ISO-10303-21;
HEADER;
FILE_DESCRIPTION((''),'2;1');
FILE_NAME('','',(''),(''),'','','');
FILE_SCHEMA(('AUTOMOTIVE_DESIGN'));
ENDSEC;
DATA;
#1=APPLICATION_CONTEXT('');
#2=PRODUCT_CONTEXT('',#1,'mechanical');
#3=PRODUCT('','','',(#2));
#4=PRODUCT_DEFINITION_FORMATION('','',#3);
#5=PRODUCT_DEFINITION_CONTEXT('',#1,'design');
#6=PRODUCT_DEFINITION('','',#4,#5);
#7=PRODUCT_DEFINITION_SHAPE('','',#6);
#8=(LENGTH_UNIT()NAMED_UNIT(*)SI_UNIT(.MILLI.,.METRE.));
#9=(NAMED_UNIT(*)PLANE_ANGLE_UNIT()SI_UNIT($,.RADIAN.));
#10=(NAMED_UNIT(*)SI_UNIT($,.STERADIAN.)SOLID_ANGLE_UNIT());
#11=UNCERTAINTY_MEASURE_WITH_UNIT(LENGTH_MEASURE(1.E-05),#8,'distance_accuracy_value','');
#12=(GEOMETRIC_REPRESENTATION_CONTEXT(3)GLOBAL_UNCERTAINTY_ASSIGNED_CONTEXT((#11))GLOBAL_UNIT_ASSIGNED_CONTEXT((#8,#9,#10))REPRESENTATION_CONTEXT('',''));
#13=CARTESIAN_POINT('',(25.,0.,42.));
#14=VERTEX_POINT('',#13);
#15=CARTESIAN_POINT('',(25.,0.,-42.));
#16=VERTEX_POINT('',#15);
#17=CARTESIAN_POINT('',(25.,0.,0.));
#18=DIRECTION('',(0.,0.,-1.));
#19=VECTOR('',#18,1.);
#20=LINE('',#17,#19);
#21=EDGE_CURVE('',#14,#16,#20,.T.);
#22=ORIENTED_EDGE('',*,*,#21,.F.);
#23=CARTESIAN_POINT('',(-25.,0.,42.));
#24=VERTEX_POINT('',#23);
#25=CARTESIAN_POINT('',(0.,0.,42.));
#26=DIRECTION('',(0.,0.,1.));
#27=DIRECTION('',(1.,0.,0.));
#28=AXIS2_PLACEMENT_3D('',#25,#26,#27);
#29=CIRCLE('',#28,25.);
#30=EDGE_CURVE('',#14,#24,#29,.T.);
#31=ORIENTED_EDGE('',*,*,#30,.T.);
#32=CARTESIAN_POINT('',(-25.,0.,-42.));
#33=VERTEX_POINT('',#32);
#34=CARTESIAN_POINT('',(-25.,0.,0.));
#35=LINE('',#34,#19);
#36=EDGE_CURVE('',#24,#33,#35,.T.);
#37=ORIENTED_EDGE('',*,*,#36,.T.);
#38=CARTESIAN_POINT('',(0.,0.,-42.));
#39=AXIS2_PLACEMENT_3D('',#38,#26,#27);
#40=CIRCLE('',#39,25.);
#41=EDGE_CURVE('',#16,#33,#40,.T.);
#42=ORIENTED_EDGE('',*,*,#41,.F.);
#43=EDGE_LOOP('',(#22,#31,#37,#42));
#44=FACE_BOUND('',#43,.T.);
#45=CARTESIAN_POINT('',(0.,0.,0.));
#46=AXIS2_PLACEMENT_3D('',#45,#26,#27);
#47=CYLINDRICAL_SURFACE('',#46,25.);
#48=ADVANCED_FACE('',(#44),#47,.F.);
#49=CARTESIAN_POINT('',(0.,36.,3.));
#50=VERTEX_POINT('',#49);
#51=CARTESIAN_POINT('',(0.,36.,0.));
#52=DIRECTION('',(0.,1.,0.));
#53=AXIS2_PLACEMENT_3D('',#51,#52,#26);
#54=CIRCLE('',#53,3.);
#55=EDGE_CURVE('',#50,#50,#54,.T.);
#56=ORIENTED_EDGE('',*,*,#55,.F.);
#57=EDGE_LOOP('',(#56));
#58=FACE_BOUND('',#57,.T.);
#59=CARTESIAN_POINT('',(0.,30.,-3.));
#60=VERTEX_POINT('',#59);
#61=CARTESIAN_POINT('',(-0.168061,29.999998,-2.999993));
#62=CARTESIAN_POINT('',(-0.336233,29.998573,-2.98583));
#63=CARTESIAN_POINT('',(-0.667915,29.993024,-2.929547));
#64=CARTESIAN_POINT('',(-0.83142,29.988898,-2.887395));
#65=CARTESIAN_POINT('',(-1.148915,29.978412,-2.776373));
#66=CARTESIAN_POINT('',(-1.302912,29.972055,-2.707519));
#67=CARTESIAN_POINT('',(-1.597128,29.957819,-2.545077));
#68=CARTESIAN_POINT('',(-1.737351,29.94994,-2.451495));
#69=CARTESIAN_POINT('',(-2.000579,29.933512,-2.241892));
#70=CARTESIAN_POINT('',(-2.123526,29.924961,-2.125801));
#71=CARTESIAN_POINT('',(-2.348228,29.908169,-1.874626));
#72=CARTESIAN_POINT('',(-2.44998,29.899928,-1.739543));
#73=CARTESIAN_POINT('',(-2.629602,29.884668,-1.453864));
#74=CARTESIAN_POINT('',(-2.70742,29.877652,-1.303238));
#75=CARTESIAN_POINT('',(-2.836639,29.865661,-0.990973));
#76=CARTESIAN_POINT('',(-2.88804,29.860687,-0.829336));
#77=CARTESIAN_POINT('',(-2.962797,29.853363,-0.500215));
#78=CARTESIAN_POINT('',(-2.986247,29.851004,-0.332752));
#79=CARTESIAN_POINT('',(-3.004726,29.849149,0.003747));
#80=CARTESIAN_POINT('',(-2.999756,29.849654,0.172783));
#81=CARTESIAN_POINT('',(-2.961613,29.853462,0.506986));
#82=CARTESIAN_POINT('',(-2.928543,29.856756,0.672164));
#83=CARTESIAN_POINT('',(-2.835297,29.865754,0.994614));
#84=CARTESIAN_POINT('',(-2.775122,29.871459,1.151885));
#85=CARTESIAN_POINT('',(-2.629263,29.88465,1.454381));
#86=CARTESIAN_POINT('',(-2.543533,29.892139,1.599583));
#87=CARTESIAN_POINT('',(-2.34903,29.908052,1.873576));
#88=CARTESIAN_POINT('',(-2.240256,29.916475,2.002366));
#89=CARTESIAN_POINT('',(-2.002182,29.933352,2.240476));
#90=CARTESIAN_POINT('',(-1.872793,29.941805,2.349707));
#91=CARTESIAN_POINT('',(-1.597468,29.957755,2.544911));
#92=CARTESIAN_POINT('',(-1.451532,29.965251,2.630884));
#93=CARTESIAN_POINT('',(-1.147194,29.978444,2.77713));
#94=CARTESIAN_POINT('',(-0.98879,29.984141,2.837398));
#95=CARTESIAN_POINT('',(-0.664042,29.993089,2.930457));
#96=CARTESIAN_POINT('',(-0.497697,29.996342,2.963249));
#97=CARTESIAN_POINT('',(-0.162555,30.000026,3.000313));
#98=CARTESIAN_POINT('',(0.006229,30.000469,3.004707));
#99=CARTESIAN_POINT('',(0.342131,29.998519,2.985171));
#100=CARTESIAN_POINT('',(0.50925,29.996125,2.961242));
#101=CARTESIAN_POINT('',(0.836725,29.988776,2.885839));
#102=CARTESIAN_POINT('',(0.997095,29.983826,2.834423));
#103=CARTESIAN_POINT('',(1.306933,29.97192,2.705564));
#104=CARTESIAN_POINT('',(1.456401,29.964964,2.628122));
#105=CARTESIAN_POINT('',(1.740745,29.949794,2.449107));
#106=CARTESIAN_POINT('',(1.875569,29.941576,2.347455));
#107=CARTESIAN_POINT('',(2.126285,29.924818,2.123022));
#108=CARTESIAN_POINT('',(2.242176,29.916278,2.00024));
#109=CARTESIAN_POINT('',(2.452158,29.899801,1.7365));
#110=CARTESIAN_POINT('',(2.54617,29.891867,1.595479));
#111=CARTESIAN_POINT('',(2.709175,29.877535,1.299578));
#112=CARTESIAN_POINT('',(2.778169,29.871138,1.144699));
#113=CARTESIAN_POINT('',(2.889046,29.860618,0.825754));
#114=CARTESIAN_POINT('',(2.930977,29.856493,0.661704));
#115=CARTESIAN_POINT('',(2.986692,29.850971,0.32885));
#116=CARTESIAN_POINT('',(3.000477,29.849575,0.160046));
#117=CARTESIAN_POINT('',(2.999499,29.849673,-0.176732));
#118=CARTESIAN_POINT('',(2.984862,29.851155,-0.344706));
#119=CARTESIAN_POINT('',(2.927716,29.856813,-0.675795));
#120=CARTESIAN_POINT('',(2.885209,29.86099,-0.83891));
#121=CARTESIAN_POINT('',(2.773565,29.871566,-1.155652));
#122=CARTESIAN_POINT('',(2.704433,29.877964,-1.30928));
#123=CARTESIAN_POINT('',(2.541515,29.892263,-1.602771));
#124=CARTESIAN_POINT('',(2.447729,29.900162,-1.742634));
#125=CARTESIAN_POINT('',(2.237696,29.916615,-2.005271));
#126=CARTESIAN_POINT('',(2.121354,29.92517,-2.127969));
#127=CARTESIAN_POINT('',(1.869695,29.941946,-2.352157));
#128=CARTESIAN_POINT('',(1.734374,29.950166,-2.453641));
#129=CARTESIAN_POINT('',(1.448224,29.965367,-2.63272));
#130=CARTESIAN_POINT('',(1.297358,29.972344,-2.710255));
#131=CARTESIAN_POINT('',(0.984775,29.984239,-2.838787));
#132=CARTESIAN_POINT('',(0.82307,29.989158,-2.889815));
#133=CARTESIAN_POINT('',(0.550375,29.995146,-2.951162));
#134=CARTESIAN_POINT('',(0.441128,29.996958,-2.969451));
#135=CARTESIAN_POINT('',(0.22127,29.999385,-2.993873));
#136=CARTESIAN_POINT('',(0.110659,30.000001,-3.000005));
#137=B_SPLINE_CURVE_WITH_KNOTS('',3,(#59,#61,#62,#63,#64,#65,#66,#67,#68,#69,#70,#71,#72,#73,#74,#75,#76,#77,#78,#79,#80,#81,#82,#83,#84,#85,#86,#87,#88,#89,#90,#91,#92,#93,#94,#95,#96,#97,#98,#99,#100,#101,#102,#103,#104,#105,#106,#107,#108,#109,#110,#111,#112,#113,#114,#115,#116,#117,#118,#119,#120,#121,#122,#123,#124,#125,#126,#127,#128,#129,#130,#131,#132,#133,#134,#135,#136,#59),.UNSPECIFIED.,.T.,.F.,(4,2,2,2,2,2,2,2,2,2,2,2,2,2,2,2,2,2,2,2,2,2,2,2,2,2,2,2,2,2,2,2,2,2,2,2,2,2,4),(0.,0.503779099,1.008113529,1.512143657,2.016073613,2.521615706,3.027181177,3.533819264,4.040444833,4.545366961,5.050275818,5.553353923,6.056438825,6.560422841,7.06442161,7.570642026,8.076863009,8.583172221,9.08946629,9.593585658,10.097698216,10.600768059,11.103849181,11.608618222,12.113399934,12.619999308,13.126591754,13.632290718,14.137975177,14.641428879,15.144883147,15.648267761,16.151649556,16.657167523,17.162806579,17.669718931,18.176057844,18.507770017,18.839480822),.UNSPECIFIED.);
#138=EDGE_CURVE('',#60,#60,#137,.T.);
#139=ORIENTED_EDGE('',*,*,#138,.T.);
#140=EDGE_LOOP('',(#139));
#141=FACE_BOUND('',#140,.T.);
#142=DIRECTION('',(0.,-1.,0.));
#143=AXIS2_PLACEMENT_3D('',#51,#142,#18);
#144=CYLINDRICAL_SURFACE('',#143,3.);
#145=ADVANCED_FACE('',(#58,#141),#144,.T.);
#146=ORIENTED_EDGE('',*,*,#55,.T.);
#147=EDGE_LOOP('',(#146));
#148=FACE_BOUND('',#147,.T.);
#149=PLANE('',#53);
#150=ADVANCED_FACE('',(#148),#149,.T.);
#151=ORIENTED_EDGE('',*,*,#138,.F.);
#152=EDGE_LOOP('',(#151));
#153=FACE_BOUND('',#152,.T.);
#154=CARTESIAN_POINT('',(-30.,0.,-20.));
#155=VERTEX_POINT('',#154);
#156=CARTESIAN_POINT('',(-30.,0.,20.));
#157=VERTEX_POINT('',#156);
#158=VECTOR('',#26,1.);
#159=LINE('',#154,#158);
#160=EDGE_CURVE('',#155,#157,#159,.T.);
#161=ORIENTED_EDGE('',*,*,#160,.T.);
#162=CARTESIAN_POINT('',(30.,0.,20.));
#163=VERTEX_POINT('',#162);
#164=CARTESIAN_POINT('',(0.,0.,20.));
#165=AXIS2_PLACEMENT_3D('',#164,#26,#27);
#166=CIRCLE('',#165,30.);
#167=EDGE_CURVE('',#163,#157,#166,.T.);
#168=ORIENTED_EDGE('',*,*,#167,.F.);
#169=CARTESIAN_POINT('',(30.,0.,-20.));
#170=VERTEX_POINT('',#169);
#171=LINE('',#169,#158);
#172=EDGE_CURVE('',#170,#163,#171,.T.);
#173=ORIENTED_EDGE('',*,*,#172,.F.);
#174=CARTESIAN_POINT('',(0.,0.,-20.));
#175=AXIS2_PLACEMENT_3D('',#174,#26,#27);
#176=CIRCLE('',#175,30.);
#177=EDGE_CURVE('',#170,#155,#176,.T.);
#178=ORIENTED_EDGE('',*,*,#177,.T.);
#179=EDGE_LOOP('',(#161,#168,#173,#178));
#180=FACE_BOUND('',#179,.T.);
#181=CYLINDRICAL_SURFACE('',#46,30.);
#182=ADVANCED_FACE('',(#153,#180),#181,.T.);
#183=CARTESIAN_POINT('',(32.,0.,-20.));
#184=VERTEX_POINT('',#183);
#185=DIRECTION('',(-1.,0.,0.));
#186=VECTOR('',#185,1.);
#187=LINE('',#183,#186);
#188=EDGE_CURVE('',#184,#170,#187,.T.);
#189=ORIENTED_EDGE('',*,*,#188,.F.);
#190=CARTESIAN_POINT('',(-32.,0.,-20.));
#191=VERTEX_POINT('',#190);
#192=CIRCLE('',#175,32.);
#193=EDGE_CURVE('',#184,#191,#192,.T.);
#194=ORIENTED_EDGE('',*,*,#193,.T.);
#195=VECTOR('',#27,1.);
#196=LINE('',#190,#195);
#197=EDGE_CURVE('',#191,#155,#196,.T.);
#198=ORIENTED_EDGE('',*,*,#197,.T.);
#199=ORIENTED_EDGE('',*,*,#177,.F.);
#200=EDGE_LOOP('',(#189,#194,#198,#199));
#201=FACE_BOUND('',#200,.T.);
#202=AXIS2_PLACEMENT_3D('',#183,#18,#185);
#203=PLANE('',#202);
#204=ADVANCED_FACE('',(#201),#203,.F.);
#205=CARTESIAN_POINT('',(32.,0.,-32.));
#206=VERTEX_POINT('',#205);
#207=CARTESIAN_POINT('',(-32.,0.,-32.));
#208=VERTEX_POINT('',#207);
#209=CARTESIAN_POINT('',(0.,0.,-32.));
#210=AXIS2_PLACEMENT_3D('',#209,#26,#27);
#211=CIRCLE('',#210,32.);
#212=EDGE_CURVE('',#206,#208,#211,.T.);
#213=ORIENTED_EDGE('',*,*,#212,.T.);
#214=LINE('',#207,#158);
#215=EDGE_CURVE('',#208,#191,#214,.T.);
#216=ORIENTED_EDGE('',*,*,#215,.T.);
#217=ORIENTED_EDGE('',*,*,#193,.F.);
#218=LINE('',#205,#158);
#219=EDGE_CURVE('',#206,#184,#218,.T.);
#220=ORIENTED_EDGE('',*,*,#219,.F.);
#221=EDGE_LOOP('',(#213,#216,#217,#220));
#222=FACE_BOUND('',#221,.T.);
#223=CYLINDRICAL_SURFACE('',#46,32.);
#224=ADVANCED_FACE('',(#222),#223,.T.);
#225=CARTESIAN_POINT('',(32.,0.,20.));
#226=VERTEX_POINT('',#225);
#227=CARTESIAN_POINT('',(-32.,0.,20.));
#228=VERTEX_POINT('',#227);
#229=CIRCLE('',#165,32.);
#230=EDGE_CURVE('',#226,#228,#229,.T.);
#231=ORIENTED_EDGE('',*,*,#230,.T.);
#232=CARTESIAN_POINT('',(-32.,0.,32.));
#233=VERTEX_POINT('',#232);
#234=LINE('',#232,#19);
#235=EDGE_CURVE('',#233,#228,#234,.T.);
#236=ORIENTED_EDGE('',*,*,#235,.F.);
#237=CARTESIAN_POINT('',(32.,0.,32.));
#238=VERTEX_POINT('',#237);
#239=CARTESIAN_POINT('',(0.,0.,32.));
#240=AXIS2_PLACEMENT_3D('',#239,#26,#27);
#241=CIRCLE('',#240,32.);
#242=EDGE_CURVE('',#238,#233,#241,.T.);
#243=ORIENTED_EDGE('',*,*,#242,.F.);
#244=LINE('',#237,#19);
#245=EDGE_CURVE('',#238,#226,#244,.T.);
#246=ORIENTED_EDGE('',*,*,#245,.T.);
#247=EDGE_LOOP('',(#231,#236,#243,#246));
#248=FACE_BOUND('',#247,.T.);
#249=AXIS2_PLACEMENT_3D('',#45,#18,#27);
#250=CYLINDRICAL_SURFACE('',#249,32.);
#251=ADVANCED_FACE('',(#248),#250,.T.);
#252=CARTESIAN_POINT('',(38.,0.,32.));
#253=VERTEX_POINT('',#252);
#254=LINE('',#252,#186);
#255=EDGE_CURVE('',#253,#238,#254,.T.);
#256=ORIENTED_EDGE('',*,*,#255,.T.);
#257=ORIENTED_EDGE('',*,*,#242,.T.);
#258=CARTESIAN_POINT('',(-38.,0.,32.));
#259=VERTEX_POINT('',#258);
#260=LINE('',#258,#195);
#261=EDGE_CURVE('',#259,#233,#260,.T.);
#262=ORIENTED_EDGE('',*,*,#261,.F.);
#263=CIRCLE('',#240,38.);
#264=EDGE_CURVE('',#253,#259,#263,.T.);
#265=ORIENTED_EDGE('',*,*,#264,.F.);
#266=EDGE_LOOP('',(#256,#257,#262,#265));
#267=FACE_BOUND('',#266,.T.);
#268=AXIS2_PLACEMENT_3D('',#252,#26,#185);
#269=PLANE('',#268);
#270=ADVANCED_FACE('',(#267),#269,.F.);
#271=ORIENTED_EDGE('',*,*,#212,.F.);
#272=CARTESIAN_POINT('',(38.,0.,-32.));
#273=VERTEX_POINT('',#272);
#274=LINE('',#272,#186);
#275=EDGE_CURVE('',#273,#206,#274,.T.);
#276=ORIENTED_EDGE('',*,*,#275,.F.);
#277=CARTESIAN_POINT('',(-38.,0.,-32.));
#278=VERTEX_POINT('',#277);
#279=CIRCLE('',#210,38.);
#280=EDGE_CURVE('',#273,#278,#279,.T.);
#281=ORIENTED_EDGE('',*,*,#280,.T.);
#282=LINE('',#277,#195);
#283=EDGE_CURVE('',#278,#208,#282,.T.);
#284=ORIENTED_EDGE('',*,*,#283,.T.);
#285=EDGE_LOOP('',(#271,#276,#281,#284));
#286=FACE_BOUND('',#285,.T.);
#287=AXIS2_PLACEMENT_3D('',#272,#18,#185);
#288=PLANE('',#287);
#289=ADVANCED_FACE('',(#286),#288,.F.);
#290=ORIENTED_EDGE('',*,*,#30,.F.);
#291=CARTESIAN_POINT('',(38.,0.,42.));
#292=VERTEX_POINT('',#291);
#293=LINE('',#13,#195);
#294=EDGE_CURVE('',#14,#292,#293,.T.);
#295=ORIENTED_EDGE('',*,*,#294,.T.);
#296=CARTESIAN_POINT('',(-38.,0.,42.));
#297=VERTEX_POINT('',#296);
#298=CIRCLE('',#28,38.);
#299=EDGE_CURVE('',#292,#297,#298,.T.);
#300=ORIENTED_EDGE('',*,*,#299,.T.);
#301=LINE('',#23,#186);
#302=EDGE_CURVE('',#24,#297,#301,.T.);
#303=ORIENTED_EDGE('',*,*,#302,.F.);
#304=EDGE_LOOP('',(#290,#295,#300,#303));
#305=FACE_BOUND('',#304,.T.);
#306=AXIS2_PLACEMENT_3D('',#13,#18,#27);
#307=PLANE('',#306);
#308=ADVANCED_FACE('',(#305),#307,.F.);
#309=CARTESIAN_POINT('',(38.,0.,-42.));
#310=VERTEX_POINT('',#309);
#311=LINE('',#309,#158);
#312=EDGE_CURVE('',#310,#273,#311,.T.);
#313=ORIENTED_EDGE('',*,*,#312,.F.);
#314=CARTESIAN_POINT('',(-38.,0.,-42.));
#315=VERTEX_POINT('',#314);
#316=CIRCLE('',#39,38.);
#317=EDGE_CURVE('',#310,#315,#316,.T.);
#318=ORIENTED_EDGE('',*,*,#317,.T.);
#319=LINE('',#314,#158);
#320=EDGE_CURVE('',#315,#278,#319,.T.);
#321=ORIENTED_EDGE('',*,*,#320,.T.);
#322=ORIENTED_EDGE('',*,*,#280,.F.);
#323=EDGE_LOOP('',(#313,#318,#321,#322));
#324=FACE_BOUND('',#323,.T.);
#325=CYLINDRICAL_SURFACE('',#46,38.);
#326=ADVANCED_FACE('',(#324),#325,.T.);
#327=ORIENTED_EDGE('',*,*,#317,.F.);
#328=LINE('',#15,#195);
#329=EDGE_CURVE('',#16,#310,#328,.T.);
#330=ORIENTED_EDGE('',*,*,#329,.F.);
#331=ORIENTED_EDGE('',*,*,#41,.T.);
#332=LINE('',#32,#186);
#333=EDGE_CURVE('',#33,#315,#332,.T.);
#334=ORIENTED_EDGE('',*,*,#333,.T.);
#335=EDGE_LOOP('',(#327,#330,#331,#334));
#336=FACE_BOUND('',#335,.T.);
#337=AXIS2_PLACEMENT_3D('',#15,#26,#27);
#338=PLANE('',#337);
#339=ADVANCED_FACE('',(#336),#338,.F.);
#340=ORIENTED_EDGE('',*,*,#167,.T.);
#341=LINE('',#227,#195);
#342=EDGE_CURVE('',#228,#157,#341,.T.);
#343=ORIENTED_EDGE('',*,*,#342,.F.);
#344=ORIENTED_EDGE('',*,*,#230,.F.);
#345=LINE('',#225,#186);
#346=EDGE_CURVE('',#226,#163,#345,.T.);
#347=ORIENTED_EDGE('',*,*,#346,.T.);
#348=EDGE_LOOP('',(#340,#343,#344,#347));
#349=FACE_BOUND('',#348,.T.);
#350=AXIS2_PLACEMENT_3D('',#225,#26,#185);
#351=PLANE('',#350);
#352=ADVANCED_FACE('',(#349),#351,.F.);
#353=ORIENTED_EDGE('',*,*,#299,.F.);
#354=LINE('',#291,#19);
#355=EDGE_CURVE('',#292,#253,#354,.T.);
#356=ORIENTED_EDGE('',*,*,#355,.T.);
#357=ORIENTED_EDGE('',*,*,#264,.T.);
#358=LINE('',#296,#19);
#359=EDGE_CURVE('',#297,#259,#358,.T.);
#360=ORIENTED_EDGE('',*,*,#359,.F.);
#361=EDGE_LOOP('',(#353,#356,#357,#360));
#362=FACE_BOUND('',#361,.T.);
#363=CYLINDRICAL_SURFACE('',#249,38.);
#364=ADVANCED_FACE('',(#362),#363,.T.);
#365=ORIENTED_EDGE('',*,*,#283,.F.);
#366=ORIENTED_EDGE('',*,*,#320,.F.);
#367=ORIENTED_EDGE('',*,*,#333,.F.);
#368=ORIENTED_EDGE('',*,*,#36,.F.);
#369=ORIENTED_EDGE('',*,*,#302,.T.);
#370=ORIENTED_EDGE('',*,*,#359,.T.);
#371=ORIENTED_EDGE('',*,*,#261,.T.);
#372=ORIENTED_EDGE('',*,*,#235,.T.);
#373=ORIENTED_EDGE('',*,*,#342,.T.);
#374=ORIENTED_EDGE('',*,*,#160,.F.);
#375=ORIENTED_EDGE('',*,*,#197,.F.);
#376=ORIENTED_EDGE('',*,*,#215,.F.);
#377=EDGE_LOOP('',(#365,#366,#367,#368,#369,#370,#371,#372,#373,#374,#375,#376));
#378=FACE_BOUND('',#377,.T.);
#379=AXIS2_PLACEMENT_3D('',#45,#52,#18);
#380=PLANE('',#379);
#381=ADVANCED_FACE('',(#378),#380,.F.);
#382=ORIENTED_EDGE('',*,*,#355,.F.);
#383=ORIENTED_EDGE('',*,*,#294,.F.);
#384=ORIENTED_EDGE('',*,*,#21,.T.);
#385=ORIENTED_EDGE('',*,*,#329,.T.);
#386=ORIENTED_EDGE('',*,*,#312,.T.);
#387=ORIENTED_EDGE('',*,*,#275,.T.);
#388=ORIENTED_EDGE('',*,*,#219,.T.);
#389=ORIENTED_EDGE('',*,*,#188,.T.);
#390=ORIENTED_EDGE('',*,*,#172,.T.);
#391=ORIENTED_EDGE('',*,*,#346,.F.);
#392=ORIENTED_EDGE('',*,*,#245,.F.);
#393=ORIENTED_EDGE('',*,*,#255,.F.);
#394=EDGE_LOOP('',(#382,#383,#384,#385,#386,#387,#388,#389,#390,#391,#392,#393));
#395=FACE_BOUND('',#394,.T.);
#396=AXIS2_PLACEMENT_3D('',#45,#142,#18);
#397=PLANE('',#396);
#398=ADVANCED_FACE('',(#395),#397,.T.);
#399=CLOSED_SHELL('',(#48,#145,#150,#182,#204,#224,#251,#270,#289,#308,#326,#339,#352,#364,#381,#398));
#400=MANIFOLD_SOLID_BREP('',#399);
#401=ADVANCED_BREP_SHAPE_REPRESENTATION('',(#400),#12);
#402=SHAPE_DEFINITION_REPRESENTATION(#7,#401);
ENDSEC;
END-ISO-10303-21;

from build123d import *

# Parameters (mm, degrees)
REVOLVE1_START                       = -42
REVOLVE1_DEPTH                       = 42
REVOLVE1_2_DEPTH                     = 10
REVOLVE1_START_2                     = -32
REVOLVE1_3_DEPTH                     = 12
SKETCH2_R                            = 3
BOSS_EXTRUDE1_DEPTH                  = 6
BOSS_EXTRUDE1_DIRECTION_2_REACH      = 66.094
BOSS_EXTRUDE1_DIRECTION_2_END_RADIUS = 30


# Read off the part's stored shape, not the designer's step: Revolve1
with BuildPart() as part:
    # Revolve1 outline → Revolve1 (new body)
    with BuildSketch(Plane.XY.offset(REVOLVE1_START)):
        with BuildLine():
            ThreePointArc((-25, 0), (0, 25), (25, 0))
            Line((25, 0), (30, 0))
            ThreePointArc((30, 0), (0, 30), (-30, 0))
            Line((-30, 0), (-25, 0))
        make_face()
    revolve1 = extrude(amount=REVOLVE1_DEPTH)



with BuildPart() as body_2:
    # Revolve1 2 outline → Revolve1 2 (new body)
    with BuildSketch(Plane.XY.offset(REVOLVE1_START)):
        with BuildLine():
            ThreePointArc((-30, 0), (0, 30), (30, 0))
            Line((30, 0), (38, 0))
            ThreePointArc((38, 0), (0, 38), (-38, 0))
            Line((-38, 0), (-30, 0))
        make_face()
    revolve1_2 = extrude(amount=REVOLVE1_2_DEPTH)


with BuildPart() as part_1:
    add(part.part)

    add(body_2.part)  # Revolve1 3 merges body 2
    # Revolve1 3 outline → Revolve1 3 (add)
    with BuildSketch(Plane.XY.offset(REVOLVE1_START_2)):
        with BuildLine():
            ThreePointArc((-30, 0), (0, 30), (30, 0))
            Line((30, 0), (32, 0))
            ThreePointArc((32, 0), (0, 32), (-32, 0))
            Line((-32, 0), (-30, 0))
        make_face()
    revolve1_3 = extrude(amount=REVOLVE1_3_DEPTH)

    # Mirror1: Revolve1, Revolve1 2, Revolve1 3 across plane
    add(revolve1.mirror(Plane(origin=(30, 0, 0), x_dir=(1, 0, 0), z_dir=(0, 0, -1))))
    add(revolve1_2.mirror(Plane(origin=(30, 0, 0), x_dir=(1, 0, 0), z_dir=(0, 0, -1))))
    add(revolve1_3.mirror(Plane(origin=(30, 0, 0), x_dir=(1, 0, 0), z_dir=(0, 0, -1))))

    # Sketch2 → Boss-Extrude1 (add)
    with BuildSketch(Plane(origin=(0, 30, 0), x_dir=(1, 0, 0), z_dir=(0, 1, 0))):
        with Locations(Location((0, 0, 0), (0, 0, 90))):
            Circle(SKETCH2_R)
    extrude(amount=BOSS_EXTRUDE1_DEPTH)

    # Boss-Extrude1 direction 2: up to this cylinder (the profile starts outside it)
    boss_extrude1_direction_2_end = Plane(origin=(0, 0, 0), z_dir=(0, 0, 1)) * Cylinder(BOSS_EXTRUDE1_DIRECTION_2_END_RADIUS, 193.188, mode=Mode.PRIVATE)
    # Sketch2 → Boss-Extrude1 direction 2 (add, up to the surface)
    with BuildSketch(Plane(origin=(0, 30, 0), x_dir=(1, 0, 0), z_dir=(0, 1, 0)), mode=Mode.PRIVATE) as boss_extrude1_direction_2_sk1:
        with Locations(Location((0, 0, 0), (0, 0, 90))):
            Circle(SKETCH2_R)
    boss_extrude1_direction_2_tool1 = extrude(boss_extrude1_direction_2_sk1.sketch, amount=-BOSS_EXTRUDE1_DIRECTION_2_REACH, mode=Mode.PRIVATE) - boss_extrude1_direction_2_end
    add(boss_extrude1_direction_2_tool1.solids().sort_by_distance((0, 30, 0))[0])
    add(boss_extrude1_direction_2_tool1.solids().sort_by_distance((0, 30, 0))[1])


solid = part_1.part
